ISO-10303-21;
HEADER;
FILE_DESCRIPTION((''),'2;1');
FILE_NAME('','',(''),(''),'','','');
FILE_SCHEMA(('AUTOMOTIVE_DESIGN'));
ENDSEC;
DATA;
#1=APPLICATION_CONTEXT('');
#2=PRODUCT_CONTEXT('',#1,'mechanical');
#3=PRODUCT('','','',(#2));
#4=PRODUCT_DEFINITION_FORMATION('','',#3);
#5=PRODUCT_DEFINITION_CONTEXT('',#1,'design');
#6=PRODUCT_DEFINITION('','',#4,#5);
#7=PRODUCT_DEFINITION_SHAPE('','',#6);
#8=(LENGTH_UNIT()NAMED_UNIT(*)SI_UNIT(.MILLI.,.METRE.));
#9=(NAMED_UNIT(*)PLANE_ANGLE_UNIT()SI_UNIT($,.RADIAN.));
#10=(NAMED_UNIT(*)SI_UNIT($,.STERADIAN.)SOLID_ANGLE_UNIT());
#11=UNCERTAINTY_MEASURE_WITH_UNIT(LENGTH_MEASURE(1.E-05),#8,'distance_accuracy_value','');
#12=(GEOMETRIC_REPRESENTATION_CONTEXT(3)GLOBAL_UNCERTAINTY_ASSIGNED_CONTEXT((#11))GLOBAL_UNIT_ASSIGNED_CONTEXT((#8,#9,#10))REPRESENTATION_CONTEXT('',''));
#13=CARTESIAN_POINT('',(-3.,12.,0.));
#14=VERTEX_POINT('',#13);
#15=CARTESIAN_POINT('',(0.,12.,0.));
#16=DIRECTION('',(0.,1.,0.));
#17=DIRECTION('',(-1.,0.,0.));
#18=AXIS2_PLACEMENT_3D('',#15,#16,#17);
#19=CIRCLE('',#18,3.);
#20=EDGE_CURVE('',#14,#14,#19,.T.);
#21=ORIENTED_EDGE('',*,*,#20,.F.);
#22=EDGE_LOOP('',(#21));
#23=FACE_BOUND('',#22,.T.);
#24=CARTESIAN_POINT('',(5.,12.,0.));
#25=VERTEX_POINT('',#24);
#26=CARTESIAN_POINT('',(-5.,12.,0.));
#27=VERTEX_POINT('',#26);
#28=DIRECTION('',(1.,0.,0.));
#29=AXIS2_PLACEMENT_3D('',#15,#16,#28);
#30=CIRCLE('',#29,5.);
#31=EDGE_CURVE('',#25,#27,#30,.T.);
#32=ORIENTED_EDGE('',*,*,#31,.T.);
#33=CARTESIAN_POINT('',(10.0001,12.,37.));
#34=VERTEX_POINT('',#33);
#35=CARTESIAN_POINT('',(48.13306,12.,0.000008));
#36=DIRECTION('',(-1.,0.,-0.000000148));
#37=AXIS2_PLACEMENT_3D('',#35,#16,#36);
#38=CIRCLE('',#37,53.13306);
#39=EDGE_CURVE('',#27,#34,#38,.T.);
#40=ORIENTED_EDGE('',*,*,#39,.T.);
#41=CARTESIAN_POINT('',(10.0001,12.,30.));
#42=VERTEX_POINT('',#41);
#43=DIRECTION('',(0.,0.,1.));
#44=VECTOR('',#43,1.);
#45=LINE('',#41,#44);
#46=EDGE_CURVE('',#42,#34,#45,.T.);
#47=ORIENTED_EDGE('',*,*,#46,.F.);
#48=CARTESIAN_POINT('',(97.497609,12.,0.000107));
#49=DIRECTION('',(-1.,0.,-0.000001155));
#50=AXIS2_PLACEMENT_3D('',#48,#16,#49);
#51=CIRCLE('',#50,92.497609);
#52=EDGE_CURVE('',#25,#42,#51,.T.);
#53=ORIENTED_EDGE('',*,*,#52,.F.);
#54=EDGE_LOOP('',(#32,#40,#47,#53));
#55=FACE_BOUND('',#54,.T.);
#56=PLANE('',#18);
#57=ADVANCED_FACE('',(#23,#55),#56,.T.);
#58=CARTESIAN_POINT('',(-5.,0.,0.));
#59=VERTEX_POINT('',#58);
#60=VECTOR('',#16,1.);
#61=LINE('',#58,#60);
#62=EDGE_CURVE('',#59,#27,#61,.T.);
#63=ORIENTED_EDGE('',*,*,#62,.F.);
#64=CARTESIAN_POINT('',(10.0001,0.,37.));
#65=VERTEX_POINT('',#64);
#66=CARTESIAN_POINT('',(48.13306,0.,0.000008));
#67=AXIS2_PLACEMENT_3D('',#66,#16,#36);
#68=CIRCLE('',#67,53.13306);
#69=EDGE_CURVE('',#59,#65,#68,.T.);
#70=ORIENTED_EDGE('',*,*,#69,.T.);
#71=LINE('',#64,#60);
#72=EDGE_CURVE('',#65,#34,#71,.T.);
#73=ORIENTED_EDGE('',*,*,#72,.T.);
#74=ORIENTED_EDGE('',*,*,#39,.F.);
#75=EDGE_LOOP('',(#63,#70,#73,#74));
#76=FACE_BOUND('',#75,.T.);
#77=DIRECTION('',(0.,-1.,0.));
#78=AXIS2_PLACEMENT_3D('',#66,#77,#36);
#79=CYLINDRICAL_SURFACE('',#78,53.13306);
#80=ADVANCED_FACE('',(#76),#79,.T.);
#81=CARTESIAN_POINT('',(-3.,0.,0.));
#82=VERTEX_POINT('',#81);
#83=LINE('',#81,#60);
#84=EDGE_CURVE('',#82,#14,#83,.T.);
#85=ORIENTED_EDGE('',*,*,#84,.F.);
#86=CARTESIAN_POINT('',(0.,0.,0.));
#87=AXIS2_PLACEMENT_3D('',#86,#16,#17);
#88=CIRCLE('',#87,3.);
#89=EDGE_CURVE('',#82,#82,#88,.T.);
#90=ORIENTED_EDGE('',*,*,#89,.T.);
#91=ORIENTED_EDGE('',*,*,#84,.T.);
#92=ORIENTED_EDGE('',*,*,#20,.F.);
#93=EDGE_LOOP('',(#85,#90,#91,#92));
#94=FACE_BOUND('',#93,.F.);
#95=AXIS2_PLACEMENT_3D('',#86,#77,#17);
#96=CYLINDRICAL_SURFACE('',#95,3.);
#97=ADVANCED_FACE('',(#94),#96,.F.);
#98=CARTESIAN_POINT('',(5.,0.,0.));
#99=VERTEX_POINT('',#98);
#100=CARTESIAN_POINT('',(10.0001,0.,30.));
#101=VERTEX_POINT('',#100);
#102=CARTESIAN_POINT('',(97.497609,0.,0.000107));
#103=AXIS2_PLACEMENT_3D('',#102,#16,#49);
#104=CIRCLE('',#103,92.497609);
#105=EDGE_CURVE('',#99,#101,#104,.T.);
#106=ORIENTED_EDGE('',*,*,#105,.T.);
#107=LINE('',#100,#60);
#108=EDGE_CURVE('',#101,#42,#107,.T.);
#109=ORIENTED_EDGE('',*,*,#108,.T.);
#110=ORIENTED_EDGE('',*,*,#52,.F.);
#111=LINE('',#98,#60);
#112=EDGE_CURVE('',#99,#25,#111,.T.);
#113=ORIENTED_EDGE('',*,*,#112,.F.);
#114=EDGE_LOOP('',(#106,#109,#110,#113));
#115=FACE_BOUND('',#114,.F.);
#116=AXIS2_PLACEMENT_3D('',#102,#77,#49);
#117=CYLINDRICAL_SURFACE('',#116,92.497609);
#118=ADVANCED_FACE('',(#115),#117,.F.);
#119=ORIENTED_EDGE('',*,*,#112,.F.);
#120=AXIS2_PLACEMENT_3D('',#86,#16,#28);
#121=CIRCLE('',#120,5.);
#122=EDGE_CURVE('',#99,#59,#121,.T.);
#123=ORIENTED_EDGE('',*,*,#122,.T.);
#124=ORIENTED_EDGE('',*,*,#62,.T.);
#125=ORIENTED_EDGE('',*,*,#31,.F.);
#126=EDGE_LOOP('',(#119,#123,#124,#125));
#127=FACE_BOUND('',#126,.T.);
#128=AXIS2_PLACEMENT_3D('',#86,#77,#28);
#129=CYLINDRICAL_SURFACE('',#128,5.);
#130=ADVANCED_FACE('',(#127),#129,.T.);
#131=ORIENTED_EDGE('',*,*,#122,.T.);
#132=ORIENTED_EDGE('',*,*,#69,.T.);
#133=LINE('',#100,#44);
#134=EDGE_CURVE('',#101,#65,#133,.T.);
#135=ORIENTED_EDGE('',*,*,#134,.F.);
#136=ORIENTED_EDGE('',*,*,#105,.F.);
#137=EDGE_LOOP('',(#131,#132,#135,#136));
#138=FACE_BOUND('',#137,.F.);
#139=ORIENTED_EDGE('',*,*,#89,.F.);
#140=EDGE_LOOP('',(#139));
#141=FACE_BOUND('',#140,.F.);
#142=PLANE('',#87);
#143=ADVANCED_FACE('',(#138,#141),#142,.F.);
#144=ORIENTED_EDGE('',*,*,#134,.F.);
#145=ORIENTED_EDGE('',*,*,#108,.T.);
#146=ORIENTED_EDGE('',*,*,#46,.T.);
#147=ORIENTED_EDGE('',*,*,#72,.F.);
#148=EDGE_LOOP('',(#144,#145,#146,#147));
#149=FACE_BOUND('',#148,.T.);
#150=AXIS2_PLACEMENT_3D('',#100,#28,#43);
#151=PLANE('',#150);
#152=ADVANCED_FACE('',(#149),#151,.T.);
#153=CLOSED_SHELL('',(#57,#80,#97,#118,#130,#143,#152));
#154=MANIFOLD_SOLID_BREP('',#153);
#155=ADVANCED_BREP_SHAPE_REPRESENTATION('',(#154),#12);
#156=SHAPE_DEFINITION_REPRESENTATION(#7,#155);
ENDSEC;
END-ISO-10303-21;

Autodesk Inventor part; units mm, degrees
ref_plane "YZ Plane" through (0, 0, 0) normal (1, 0, 0) x (0, 1, 0)
ref_plane "XZ Plane" through (0, 0, 0) normal (0, 1, 0) x (-1, 0, 0)
ref_plane "XY Plane" through (0, 0, 0) normal (0, 0, 1) x (1, 0, 0)
sketch "Sketch1" plane through (0, 0, 0) normal (0, 1, 0) x (-1, 0, 0)
  circle A0 centre (0, 0) radius 3
  arc A1 (-5, 0) -> (5, 0) centre (0, 0) ccw
  line L0 (-10.0001, 41) -> (-10, 19) construction
  line L1 (0, 0) -> (-5, 0) construction
  line L2 (-10.0001, 30) -> (-10.0001, 37)
  arc A2 (5, 0) -> (-10.0001, 37) centre (-48.1331, 0) ccw
  arc A3 (-5, 0) -> (-10.0001, 30) centre (-97.4989, 0) ccw
  line L3 (0, 0) -> (5, 0)
  arc A4 (5, 0) -> (-5, 0) centre (0, 0) ccw construction
  dimension "d0" = 6
  dimension "d1" = 2
  dimension "d2" = 10
  dimension "d3" = 30
  dimension "d4" = 5.0001
  dimension "d5" = 7
extrude "Extrusion1" add sketch "Sketch1" along normal blind 12
properties part number "Clutch"
